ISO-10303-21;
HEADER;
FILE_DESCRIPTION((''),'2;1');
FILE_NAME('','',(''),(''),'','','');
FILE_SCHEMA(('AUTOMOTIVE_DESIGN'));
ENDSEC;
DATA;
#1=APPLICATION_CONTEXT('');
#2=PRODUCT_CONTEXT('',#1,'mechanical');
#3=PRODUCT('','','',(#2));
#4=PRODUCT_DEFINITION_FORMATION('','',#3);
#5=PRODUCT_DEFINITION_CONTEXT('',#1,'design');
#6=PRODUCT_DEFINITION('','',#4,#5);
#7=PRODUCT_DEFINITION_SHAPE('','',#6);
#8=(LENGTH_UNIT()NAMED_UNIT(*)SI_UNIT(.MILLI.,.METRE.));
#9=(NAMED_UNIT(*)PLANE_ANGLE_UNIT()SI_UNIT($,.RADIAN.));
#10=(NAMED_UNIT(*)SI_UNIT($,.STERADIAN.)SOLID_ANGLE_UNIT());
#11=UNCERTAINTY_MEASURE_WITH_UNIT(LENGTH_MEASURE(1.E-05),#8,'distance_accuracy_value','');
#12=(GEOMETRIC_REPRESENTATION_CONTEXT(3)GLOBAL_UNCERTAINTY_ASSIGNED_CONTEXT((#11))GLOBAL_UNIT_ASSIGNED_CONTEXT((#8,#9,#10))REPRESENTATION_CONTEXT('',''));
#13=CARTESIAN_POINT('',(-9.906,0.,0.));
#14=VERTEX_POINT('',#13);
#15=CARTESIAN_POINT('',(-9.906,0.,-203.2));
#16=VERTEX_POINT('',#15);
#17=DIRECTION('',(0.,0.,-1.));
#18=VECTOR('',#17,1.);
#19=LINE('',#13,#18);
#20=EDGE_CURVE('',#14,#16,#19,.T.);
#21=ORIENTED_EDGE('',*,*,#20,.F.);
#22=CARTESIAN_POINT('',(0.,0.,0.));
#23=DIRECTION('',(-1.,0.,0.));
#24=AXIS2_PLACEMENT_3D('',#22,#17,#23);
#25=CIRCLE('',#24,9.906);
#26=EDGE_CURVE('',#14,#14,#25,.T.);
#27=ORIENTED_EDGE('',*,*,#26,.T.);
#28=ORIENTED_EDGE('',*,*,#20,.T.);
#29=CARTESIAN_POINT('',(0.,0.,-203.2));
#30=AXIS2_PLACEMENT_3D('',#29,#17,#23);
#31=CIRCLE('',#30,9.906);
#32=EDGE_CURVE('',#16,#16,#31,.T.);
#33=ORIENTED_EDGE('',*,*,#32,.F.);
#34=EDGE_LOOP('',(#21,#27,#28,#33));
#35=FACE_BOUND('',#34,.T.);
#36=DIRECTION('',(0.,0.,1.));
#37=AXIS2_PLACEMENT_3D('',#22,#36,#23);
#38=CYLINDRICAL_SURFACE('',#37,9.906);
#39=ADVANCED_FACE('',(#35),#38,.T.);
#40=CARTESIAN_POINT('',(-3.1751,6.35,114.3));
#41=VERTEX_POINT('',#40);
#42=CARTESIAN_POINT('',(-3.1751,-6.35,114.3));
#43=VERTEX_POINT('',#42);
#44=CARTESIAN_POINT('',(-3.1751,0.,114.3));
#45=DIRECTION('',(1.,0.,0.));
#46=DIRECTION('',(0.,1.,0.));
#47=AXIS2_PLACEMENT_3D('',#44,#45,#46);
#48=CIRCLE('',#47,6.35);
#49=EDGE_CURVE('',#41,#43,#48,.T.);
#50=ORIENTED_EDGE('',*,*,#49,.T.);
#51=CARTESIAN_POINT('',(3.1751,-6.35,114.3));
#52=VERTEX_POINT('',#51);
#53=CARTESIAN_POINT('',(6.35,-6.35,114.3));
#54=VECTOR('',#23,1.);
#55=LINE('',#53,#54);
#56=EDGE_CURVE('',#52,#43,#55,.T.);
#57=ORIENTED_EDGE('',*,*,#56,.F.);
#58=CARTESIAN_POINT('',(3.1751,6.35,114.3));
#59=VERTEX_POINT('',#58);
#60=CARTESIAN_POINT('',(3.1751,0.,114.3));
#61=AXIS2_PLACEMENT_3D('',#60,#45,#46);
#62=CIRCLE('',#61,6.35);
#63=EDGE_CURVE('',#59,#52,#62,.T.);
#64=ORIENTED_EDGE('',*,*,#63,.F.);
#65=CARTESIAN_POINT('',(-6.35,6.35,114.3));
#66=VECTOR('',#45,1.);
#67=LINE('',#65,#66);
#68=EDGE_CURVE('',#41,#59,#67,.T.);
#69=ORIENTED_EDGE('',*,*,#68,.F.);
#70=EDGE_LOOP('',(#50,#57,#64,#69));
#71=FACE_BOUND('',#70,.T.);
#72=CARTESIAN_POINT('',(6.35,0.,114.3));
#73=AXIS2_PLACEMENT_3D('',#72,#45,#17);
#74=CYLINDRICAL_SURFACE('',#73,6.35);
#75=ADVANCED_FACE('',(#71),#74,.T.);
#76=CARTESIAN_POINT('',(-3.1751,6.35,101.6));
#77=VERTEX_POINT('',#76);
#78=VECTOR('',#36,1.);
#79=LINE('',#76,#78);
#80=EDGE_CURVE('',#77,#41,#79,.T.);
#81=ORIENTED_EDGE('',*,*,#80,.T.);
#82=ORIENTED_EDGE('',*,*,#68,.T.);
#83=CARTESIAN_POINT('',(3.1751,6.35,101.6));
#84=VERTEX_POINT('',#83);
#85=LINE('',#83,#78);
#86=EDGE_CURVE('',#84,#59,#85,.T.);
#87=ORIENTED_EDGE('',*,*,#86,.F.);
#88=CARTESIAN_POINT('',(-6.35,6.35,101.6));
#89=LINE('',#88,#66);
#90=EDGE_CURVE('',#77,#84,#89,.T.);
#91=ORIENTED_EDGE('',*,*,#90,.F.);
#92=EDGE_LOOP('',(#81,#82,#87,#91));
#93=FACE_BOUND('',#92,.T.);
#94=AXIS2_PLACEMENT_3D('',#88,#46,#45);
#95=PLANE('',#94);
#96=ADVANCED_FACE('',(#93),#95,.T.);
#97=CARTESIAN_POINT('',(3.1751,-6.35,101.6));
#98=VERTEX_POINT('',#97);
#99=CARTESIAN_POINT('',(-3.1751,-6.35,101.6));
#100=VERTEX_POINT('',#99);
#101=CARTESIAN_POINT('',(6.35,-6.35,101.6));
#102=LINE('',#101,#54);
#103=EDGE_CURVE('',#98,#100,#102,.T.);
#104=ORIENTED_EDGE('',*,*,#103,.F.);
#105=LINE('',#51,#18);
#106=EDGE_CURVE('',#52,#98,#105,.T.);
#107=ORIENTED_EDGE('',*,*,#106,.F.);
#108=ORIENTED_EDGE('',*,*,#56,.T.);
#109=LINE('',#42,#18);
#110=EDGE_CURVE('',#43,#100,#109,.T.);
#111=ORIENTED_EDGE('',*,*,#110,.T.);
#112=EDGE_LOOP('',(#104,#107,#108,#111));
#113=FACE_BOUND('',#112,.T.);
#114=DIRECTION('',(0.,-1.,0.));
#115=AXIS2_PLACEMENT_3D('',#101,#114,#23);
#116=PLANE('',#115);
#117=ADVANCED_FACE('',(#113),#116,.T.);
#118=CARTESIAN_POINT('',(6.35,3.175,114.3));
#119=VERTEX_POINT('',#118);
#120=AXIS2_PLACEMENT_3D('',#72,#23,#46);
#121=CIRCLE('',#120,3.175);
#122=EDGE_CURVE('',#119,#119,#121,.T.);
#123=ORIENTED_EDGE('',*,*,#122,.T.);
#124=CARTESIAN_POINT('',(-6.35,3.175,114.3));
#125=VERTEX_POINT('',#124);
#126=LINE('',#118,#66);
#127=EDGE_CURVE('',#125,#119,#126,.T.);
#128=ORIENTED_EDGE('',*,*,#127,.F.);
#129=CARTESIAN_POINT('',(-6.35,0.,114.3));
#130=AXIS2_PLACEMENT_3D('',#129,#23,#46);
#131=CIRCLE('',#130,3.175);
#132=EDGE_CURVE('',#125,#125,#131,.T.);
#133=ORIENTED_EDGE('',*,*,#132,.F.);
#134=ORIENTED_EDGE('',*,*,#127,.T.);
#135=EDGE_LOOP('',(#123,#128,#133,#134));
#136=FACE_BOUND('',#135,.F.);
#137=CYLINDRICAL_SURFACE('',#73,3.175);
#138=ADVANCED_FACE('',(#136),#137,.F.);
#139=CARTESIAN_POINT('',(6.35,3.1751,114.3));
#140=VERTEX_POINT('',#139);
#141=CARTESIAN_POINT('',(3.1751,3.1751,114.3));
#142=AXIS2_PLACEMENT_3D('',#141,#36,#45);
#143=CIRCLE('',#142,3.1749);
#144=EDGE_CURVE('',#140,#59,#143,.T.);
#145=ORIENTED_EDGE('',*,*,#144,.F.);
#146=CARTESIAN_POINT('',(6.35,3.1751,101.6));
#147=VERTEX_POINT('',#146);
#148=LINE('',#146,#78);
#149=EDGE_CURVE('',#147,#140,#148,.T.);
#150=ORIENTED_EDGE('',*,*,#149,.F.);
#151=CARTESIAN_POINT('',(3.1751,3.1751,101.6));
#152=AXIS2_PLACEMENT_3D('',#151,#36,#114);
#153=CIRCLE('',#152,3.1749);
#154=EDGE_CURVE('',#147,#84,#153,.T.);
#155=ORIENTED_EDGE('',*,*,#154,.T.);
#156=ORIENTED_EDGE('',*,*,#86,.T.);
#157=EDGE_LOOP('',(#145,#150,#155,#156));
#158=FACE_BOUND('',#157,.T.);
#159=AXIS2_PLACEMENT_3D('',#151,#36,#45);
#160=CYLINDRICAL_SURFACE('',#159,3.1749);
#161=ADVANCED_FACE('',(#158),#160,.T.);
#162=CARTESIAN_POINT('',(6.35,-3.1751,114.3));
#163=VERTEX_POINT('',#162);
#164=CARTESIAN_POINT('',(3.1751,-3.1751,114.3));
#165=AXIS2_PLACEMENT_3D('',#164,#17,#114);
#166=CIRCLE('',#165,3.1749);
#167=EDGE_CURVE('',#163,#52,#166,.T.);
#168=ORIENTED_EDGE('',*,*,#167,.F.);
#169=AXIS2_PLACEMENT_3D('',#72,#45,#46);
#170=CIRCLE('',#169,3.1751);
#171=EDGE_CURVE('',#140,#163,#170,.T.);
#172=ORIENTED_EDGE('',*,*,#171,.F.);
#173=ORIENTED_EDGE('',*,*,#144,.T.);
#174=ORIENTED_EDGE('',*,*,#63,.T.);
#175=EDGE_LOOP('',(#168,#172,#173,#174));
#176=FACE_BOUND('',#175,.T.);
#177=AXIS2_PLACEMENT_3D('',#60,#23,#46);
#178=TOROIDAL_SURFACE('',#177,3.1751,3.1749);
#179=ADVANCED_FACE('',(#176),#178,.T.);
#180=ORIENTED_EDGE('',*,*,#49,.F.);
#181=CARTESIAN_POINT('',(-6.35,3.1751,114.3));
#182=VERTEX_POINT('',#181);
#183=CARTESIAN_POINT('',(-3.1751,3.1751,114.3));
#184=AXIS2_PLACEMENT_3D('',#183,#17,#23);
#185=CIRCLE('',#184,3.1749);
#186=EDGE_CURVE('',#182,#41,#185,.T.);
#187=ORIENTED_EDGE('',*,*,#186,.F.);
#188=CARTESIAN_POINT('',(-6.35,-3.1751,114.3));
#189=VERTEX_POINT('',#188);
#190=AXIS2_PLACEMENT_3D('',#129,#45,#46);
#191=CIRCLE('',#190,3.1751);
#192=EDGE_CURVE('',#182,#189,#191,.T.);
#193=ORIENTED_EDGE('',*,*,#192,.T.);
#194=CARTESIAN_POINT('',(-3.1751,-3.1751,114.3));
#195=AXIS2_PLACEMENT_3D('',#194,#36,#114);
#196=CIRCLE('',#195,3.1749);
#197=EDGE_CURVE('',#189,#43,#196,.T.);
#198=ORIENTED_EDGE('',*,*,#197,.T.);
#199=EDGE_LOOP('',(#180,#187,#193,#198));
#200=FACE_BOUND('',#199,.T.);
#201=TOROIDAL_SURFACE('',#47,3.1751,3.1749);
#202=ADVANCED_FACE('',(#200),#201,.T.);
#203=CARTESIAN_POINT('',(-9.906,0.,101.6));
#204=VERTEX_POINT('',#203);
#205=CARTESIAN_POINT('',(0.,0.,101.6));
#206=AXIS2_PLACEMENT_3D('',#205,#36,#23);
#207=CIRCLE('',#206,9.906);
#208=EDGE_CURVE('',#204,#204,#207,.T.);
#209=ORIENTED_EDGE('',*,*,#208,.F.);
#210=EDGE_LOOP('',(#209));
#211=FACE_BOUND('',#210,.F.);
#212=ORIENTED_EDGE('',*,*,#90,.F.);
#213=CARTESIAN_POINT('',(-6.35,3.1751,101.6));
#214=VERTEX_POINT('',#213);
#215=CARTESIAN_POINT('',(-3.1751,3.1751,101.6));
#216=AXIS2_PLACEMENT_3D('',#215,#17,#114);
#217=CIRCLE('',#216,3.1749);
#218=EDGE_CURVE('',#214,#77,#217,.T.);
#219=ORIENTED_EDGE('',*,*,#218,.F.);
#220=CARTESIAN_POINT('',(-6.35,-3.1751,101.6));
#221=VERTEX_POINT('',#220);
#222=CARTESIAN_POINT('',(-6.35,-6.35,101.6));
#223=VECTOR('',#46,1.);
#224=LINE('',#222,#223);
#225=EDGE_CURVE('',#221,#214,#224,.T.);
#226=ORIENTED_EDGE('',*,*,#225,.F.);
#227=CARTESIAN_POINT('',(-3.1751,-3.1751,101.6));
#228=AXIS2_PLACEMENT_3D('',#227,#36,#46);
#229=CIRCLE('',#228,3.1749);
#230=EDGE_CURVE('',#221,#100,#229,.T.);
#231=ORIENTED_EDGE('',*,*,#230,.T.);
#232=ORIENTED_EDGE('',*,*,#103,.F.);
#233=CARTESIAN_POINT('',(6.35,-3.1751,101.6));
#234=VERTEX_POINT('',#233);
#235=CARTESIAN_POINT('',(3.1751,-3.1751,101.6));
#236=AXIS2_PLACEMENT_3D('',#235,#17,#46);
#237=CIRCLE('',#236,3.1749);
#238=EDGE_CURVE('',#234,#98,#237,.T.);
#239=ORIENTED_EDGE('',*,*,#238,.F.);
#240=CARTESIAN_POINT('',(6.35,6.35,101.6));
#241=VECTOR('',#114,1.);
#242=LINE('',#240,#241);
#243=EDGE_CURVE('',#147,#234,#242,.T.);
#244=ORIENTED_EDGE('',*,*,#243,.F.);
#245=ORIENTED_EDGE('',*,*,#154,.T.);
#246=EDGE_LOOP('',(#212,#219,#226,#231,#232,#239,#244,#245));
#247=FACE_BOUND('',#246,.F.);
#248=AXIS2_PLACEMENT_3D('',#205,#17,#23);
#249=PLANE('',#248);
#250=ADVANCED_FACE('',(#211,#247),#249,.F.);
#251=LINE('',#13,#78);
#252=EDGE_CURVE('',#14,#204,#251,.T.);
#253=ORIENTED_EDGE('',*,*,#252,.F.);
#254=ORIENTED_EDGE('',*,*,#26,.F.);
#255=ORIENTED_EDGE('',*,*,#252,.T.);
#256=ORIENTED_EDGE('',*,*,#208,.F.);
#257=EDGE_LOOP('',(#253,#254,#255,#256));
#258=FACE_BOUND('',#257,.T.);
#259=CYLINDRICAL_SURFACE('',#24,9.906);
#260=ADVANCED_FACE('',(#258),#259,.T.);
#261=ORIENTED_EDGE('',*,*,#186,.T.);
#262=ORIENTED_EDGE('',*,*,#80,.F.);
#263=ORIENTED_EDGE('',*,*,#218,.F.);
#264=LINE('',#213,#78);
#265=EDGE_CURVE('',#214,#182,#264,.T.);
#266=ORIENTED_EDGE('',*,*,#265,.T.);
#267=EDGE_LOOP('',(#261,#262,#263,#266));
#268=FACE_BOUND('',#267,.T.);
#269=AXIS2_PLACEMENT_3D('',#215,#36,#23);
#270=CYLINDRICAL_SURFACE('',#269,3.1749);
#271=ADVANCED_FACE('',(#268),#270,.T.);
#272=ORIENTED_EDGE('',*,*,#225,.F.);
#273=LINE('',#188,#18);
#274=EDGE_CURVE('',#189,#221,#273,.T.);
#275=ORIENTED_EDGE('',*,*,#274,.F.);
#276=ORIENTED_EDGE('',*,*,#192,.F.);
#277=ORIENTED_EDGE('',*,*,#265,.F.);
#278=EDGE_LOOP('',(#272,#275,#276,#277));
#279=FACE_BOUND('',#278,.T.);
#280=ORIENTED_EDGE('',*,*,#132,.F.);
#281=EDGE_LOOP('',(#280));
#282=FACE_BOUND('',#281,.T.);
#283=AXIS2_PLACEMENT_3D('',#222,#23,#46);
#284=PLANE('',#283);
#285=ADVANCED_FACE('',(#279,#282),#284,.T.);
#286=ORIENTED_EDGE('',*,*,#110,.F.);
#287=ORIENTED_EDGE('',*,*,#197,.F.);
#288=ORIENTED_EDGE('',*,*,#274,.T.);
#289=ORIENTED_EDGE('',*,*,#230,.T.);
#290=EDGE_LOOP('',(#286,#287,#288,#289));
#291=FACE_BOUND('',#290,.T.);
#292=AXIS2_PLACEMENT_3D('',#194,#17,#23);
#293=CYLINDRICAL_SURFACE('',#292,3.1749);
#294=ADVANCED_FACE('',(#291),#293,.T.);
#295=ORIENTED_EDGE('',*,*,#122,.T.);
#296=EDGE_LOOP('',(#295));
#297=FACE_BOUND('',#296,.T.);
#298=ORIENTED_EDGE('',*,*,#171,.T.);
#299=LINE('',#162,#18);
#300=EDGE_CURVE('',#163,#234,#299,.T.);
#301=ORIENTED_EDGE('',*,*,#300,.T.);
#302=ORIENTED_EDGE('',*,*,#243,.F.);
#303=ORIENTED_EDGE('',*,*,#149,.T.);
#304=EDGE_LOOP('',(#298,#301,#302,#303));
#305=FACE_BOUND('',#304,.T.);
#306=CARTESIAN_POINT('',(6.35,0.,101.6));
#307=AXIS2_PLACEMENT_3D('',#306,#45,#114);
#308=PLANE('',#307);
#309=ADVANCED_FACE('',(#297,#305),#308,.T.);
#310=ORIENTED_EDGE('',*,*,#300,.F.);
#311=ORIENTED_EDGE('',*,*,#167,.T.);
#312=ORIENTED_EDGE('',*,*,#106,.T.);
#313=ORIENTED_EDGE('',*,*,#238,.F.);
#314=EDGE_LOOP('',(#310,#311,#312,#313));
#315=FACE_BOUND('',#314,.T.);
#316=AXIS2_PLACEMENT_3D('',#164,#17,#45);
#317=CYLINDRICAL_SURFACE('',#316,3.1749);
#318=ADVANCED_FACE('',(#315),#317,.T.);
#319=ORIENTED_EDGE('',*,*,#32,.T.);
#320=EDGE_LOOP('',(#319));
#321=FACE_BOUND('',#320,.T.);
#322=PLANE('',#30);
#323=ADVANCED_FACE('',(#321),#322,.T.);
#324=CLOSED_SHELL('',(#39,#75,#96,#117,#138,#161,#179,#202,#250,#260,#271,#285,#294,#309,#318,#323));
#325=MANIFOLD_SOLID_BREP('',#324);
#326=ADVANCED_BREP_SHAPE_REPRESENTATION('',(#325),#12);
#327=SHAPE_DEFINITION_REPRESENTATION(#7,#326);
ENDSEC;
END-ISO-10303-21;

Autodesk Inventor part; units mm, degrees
ref_plane "YZ Plane" through (0, 0, 0) normal (1, 0, 0) x (0, 1, 0)
ref_plane "XZ Plane" through (0, 0, 0) normal (0, 1, 0) x (-1, 0, 0)
ref_plane "XY Plane" through (0, 0, 0) normal (0, 0, 1) x (1, 0, 0)
sketch "Sketch1" plane through (0, 0, 0) normal (0, 0, 1) x (1, 0, 0)
  circle A0 centre (0, 0) radius 6.0688
extrude "Extrusion1" add sketch "Sketch1" along normal blind 101.6
sketch "Sketch2" plane through (0, 0, 101.6) normal (0, 0, 1) x (1, 0, 0)
  line L0 (-6.0688, 6.0688) -> (6.0688, 6.0688)
  line L1 (6.0688, 6.0688) -> (6.0688, -6.0688)
  line L2 (6.0688, -6.0688) -> (-6.0688, -6.0688)
  line L3 (-6.0688, -6.0688) -> (-6.0688, 6.0688)
extrude "Extrusion2" add sketch "Sketch2" along normal blind 12.7
sketch "Sketch3" plane through (6.0688, -6.0688, 101.6) normal (1, 0, 0) x (0, 0, -1)
  line L0 (-12.7, 12.1376) -> (-12.7, 0) projected
  circle A0 centre (-12.7, 6.0688) radius 3.175
  point P0 (101.6, 6.0688)
  dimension "d4" = 6.35
extrude "Extrusion3" cut sketch "Sketch3" against normal blind 12.7
sketch "Sketch4" plane through (6.0688, -6.0688, 101.6) normal (1, 0, 0) x (0, 0, -1)
  arc A0 (-12.7, 2.8938) -> (-12.7, 9.2438) centre (-12.7, 6.0688) ccw projected
  circle A1 centre (-12.7, 6.0688) radius 3.175
  circle A2 centre (-12.7, 6.0688) radius 6.0688
  point P0 (101.6, 6.0688)
extrude "Extrusion4" add sketch "Sketch4" against normal blind 12.7
sketch "Sketch5" plane through (-6.0688, 0, 101.6) normal (-1, 0, 0) x (0, 0, 1)
  arc A0 (12.7, 6.0688) -> (12.7, -6.0688) centre (12.7, 0) ccw projected
  line L0 (0, 6.0688) -> (12.7, 6.0688) projected
  line L1 (0, 0) -> (0, 6.0688) projected
  line L2 (0, -6.0688) -> (0, 0) projected
  line L3 (0, -6.0688) -> (12.7, -6.0688) projected
  line L4 (0, 6.0688) -> (38.3978, 6.0688)
  line L5 (38.3978, 6.0688) -> (38.3978, -6.0688)
  line L6 (38.3978, -6.0688) -> (0, -6.0688)
  line L7 (0, -6.0688) -> (0, 6.0688)
  point P0 (-101.6, 0)
extrude "Extrusion5" cut sketch "Sketch5" along normal blind 12.7 contours L4 L5 L6 A0
sketch "Sketch6" plane through (0, 0, 0) normal (0, 0, -1) x (-1, 0, 0)
  circle A0 centre (0, 0) radius 6.0688 projected
  line L0 (0, 0) -> (0, 3.175)
  line L1 (0, 3.175) -> (-3.175, 3.175)
  line L2 (-3.175, 3.175) -> (3.175, 3.175)
  line L3 (3.175, 3.175) -> (3.175, -3.175)
  line L4 (3.175, -3.175) -> (-3.175, -3.175)
  line L5 (-3.175, -3.175) -> (-3.175, 3.175)
  dimension "d11" = 3.175
  dimension "d12" = 3.175
  dimension "d13" = 6.35
  dimension "d14" = 6.35
extrude "Extrusion6" add sketch "Sketch6" along normal blind 12.7 contours L2 L3 L4 L5 L1
fillet "Fillet1" radius 3.175 6 edges at (6.0688, 6.0688, 107.95) (6.0688, 0, 120.3688) (6.0688, -6.0688, 107.95) (-6.0688, 6.0688, 107.95) (-6.0688, 0, 120.3688) (-6.0688, -6.0688, 107.95)
sketch "Sketch7" plane through (0, 0, 0) normal (0, 0, -1) x (-1, 0, 0)
  circle A0 centre (0, 0) radius 6.0688 projected
  circle A1 centre (0, 0) radius 9.906
  dimension "d18" = 19.812
extrude "Extrusion7" add sketch "Sketch7" against normal blind 101.6
sketch "Sketch8" plane through (0, 0, 101.6) normal (0, 0, 1) x (1, 0, 0)
  circle A0 centre (0, 0) radius 9.906 projected
extrude "Extrusion8" cut sketch "Sketch8" along normal blind 101.6
sketch "Sketch9" plane through (0, 0, 101.6) normal (0, 0, 1) x (1, 0, 0)
  circle A0 centre (0, 0) radius 9.906 projected
  circle A1 centre (0, 0) radius 6.35
  line L0 (-6.35, 6.35) -> (6.35, 6.35)
  line L1 (6.35, 6.35) -> (6.35, -6.35)
  line L2 (6.35, -6.35) -> (-6.35, -6.35)
  line L3 (-6.35, -6.35) -> (-6.35, 6.35)
  dimension "d23" = 12.7
extrude "Extrusion9" add sketch "Sketch9" along normal blind 12.7 contours A1 | L1 L2 A1 | A1 L0 L1 | A1 L3 L0 | L2 L3 A1
sketch "Sketch10" plane through (6.35, -6.35, 101.6) normal (1, 0, 0) x (0, 0, -1)
  line L0 (-12.7, 12.7) -> (-12.7, 0) projected
  circle A0 centre (-12.7, 6.35) radius 3.175
  point P0 (101.6, 6.35)
  dimension "d26" = 6.35
extrude "Extrusion10" cut sketch "Sketch10" against normal blind 12.7
sketch "Sketch11" plane through (6.35, -6.35, 101.6) normal (1, 0, 0) x (0, 0, -1)
  arc A0 (-12.7, 3.175) -> (-12.7, 9.525) centre (-12.7, 6.35) ccw projected
  circle A1 centre (-12.7, 6.35) radius 3.175
  circle A2 centre (-12.7, 6.35) radius 6.35
  point P0 (101.6, 6.35)
extrude "Extrusion11" add sketch "Sketch11" against normal blind 12.7
fillet "Fillet2" radius 3.175 6 edges at (6.35, 6.35, 107.95) (6.35, 0, 120.65) (6.35, -6.35, 107.95) (-6.35, 6.35, 107.95) (-6.35, 0, 120.65) (-6.35, -6.35, 107.95)
sketch "Sketch12" plane through (0, 0, -12.7) normal (0, 0, -1) x (-1, 0, 0)
  line L0 (3.175, 3.175) -> (3.175, -3.175) projected
  line L1 (-3.175, 3.175) -> (3.175, 3.175) projected
  line L2 (-3.175, -3.175) -> (-3.175, 3.175) projected
  line L3 (3.175, -3.175) -> (-3.175, -3.175) projected
  point P0 (0, 0)
extrude "Extrusion12" cut sketch "Sketch12" against normal blind 12.7
sketch "Sketch13" plane through (0, 0, 0) normal (0, 0, -1) x (-1, 0, 0)
  circle A0 centre (0, 0) radius 9.906 projected
extrude "Extrusion13" add sketch "Sketch13" along normal blind 203.2
properties part number "linac arm12in"
